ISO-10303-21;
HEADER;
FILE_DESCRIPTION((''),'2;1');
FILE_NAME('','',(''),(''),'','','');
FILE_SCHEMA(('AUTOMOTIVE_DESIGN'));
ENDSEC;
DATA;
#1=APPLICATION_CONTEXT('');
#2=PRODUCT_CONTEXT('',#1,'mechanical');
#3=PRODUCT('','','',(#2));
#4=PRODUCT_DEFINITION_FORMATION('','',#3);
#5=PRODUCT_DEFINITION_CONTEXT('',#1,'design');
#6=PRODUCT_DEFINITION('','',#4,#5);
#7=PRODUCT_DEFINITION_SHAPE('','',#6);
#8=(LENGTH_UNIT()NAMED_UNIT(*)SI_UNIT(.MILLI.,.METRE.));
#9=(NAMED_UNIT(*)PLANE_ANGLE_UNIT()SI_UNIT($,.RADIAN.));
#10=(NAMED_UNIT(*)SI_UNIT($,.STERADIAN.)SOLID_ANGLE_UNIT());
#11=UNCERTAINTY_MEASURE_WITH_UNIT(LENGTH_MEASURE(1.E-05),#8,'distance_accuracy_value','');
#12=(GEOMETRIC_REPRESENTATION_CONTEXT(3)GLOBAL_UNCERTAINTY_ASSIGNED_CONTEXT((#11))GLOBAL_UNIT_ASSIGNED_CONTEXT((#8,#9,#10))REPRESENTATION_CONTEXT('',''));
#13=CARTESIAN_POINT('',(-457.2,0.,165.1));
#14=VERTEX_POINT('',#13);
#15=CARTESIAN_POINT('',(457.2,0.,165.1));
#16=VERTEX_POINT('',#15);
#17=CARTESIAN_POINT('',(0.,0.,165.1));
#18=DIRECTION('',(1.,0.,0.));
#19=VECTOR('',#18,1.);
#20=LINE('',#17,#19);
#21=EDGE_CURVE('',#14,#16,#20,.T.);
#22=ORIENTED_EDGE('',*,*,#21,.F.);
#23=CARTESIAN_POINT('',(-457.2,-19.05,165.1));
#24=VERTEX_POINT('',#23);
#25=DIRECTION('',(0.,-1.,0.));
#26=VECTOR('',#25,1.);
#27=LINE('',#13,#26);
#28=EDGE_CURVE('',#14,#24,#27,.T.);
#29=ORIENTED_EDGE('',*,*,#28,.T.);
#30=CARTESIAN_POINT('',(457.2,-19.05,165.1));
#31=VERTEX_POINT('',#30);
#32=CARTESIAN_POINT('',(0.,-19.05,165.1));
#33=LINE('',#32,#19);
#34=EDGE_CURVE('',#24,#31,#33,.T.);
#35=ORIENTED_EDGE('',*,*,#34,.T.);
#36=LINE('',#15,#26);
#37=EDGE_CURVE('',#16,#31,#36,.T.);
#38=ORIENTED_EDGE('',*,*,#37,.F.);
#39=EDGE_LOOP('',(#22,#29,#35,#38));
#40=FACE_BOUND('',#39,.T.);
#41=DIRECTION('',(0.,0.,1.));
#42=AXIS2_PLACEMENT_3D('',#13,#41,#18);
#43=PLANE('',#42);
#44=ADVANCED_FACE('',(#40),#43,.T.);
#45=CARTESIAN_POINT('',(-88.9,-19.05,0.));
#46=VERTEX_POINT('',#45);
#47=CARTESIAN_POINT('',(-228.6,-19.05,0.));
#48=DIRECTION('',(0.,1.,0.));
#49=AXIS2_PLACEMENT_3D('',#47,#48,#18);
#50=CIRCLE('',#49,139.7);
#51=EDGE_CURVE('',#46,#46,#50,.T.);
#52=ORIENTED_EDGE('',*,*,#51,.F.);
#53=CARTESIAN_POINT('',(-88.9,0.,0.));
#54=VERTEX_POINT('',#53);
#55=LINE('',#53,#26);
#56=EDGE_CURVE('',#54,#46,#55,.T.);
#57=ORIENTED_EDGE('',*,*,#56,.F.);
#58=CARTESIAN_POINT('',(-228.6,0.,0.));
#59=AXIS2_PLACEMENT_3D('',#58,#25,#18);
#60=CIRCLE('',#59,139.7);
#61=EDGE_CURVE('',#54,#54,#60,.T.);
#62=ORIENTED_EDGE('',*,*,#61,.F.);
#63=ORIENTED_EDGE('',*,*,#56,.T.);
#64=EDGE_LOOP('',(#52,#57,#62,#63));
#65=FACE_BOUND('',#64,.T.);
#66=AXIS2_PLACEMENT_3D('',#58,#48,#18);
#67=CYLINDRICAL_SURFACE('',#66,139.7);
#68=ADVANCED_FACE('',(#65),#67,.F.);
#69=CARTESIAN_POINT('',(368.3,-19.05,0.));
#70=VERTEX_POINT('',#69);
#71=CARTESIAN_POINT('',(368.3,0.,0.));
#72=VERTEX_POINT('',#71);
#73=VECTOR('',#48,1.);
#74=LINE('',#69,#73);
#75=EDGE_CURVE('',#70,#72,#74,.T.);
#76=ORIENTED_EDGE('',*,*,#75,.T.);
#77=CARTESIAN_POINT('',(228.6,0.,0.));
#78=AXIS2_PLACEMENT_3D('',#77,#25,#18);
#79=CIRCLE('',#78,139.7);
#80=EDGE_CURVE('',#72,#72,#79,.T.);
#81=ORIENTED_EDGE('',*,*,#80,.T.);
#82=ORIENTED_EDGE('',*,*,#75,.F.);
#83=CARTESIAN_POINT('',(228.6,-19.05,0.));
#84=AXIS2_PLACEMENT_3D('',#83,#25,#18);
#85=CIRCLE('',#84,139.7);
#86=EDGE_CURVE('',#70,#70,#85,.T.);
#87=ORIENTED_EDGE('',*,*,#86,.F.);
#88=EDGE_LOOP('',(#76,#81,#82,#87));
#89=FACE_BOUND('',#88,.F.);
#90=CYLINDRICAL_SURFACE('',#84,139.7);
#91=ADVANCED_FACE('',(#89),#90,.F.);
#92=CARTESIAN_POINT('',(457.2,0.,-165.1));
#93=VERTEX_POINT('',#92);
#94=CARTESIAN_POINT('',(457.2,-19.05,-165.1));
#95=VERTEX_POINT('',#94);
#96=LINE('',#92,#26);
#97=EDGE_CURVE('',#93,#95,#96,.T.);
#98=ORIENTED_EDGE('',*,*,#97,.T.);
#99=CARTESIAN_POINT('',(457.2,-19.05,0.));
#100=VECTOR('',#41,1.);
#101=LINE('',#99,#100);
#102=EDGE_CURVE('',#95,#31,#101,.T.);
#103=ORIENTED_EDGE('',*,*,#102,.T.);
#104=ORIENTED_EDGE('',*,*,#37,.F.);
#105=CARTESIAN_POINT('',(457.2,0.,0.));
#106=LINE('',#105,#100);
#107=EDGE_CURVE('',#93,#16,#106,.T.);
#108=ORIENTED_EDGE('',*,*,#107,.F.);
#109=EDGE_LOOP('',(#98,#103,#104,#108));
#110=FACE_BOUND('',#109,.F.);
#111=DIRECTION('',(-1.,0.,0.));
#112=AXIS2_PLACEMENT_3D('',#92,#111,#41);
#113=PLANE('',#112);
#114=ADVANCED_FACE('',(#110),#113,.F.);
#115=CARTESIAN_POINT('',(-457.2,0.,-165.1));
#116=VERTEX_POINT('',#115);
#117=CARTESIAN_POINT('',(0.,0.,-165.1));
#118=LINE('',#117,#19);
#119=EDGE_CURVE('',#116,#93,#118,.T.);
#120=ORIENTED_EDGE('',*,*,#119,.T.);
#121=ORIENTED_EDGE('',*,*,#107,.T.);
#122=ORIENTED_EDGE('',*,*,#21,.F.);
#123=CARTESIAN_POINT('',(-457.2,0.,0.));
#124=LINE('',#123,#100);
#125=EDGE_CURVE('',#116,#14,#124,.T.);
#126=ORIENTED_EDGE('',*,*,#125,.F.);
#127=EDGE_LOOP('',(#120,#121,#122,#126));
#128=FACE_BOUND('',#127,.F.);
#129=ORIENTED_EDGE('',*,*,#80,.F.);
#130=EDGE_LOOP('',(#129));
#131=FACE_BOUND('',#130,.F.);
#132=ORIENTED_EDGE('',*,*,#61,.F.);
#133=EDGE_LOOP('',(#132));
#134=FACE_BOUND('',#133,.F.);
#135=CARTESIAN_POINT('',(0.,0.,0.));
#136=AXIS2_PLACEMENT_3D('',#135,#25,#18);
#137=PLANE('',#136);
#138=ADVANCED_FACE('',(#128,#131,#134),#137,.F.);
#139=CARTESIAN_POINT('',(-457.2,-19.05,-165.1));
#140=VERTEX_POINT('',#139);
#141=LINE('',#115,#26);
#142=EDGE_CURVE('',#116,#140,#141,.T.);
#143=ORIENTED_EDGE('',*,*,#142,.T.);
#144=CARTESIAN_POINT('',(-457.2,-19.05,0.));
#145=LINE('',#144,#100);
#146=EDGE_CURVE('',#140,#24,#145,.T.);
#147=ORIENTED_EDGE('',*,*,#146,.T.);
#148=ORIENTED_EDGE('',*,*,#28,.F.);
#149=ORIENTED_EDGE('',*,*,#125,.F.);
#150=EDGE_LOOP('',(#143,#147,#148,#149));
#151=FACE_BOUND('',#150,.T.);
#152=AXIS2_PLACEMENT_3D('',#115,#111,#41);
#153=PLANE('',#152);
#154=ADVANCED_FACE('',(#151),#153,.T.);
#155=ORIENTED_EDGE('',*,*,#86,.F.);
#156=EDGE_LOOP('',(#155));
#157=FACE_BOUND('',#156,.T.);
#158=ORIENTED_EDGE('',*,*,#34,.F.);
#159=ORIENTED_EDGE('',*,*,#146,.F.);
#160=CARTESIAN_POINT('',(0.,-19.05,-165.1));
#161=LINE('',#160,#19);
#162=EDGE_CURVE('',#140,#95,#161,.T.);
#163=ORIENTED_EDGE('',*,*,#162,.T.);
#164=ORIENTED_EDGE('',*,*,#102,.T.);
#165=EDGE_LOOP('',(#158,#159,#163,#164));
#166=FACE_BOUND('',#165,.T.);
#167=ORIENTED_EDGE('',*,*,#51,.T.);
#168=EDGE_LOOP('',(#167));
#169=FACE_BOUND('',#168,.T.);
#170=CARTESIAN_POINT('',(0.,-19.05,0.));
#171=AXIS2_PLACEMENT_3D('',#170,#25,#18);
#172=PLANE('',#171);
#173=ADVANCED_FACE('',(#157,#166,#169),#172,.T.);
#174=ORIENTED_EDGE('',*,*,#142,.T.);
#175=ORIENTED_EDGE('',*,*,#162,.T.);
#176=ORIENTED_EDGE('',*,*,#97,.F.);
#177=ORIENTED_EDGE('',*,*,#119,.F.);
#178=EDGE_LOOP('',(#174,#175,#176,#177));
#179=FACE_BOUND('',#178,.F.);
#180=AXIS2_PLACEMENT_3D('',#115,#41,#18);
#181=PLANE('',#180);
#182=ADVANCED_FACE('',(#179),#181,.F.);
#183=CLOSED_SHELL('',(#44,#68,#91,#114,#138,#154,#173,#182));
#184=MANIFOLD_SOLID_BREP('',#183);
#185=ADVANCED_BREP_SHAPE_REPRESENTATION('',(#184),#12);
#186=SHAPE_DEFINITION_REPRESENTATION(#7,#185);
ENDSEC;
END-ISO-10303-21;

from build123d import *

# Parameters (mm, degrees)
F0_W     = 914.4
F0_H     = 330.2
F2_DEPTH = 19.05
F1_R     = 139.7
F3_DEPTH = 982
F4_DEPTH = 19.051
F5_R     = 139.7
F6_DEPTH = 19.051


# Not quite as in the source:
# - an extrude ends at something that could not be found from the text; its depth is read off the source's solid


with BuildPart() as f2:
    # F0 (on Front) → F2 (new body)
    with BuildSketch(Plane.XZ):
        Rectangle(F0_W, F0_H)
    extrude(amount=F2_DEPTH)

    # F1 (on face) → F3 (cut, through all)
    with BuildSketch(Plane.XZ):
        with Locations((-228.6, 0)):
            Circle(F1_R)
    extrude(amount=-F3_DEPTH, mode=Mode.SUBTRACT)

    # F1 (on face) → F4 (cut, through all)
    with BuildSketch(Plane.XZ):
        with Locations((-228.6, 0)):
            Circle(F1_R)
    extrude(amount=F4_DEPTH, mode=Mode.SUBTRACT)

    # F5 (on face) → F6 (cut, through all)
    with BuildSketch(Plane.XZ.offset(19.05)):
        with Locations((228.6, 0)):
            Circle(F5_R)
    extrude(amount=-F6_DEPTH, mode=Mode.SUBTRACT)


solid = f2.part
